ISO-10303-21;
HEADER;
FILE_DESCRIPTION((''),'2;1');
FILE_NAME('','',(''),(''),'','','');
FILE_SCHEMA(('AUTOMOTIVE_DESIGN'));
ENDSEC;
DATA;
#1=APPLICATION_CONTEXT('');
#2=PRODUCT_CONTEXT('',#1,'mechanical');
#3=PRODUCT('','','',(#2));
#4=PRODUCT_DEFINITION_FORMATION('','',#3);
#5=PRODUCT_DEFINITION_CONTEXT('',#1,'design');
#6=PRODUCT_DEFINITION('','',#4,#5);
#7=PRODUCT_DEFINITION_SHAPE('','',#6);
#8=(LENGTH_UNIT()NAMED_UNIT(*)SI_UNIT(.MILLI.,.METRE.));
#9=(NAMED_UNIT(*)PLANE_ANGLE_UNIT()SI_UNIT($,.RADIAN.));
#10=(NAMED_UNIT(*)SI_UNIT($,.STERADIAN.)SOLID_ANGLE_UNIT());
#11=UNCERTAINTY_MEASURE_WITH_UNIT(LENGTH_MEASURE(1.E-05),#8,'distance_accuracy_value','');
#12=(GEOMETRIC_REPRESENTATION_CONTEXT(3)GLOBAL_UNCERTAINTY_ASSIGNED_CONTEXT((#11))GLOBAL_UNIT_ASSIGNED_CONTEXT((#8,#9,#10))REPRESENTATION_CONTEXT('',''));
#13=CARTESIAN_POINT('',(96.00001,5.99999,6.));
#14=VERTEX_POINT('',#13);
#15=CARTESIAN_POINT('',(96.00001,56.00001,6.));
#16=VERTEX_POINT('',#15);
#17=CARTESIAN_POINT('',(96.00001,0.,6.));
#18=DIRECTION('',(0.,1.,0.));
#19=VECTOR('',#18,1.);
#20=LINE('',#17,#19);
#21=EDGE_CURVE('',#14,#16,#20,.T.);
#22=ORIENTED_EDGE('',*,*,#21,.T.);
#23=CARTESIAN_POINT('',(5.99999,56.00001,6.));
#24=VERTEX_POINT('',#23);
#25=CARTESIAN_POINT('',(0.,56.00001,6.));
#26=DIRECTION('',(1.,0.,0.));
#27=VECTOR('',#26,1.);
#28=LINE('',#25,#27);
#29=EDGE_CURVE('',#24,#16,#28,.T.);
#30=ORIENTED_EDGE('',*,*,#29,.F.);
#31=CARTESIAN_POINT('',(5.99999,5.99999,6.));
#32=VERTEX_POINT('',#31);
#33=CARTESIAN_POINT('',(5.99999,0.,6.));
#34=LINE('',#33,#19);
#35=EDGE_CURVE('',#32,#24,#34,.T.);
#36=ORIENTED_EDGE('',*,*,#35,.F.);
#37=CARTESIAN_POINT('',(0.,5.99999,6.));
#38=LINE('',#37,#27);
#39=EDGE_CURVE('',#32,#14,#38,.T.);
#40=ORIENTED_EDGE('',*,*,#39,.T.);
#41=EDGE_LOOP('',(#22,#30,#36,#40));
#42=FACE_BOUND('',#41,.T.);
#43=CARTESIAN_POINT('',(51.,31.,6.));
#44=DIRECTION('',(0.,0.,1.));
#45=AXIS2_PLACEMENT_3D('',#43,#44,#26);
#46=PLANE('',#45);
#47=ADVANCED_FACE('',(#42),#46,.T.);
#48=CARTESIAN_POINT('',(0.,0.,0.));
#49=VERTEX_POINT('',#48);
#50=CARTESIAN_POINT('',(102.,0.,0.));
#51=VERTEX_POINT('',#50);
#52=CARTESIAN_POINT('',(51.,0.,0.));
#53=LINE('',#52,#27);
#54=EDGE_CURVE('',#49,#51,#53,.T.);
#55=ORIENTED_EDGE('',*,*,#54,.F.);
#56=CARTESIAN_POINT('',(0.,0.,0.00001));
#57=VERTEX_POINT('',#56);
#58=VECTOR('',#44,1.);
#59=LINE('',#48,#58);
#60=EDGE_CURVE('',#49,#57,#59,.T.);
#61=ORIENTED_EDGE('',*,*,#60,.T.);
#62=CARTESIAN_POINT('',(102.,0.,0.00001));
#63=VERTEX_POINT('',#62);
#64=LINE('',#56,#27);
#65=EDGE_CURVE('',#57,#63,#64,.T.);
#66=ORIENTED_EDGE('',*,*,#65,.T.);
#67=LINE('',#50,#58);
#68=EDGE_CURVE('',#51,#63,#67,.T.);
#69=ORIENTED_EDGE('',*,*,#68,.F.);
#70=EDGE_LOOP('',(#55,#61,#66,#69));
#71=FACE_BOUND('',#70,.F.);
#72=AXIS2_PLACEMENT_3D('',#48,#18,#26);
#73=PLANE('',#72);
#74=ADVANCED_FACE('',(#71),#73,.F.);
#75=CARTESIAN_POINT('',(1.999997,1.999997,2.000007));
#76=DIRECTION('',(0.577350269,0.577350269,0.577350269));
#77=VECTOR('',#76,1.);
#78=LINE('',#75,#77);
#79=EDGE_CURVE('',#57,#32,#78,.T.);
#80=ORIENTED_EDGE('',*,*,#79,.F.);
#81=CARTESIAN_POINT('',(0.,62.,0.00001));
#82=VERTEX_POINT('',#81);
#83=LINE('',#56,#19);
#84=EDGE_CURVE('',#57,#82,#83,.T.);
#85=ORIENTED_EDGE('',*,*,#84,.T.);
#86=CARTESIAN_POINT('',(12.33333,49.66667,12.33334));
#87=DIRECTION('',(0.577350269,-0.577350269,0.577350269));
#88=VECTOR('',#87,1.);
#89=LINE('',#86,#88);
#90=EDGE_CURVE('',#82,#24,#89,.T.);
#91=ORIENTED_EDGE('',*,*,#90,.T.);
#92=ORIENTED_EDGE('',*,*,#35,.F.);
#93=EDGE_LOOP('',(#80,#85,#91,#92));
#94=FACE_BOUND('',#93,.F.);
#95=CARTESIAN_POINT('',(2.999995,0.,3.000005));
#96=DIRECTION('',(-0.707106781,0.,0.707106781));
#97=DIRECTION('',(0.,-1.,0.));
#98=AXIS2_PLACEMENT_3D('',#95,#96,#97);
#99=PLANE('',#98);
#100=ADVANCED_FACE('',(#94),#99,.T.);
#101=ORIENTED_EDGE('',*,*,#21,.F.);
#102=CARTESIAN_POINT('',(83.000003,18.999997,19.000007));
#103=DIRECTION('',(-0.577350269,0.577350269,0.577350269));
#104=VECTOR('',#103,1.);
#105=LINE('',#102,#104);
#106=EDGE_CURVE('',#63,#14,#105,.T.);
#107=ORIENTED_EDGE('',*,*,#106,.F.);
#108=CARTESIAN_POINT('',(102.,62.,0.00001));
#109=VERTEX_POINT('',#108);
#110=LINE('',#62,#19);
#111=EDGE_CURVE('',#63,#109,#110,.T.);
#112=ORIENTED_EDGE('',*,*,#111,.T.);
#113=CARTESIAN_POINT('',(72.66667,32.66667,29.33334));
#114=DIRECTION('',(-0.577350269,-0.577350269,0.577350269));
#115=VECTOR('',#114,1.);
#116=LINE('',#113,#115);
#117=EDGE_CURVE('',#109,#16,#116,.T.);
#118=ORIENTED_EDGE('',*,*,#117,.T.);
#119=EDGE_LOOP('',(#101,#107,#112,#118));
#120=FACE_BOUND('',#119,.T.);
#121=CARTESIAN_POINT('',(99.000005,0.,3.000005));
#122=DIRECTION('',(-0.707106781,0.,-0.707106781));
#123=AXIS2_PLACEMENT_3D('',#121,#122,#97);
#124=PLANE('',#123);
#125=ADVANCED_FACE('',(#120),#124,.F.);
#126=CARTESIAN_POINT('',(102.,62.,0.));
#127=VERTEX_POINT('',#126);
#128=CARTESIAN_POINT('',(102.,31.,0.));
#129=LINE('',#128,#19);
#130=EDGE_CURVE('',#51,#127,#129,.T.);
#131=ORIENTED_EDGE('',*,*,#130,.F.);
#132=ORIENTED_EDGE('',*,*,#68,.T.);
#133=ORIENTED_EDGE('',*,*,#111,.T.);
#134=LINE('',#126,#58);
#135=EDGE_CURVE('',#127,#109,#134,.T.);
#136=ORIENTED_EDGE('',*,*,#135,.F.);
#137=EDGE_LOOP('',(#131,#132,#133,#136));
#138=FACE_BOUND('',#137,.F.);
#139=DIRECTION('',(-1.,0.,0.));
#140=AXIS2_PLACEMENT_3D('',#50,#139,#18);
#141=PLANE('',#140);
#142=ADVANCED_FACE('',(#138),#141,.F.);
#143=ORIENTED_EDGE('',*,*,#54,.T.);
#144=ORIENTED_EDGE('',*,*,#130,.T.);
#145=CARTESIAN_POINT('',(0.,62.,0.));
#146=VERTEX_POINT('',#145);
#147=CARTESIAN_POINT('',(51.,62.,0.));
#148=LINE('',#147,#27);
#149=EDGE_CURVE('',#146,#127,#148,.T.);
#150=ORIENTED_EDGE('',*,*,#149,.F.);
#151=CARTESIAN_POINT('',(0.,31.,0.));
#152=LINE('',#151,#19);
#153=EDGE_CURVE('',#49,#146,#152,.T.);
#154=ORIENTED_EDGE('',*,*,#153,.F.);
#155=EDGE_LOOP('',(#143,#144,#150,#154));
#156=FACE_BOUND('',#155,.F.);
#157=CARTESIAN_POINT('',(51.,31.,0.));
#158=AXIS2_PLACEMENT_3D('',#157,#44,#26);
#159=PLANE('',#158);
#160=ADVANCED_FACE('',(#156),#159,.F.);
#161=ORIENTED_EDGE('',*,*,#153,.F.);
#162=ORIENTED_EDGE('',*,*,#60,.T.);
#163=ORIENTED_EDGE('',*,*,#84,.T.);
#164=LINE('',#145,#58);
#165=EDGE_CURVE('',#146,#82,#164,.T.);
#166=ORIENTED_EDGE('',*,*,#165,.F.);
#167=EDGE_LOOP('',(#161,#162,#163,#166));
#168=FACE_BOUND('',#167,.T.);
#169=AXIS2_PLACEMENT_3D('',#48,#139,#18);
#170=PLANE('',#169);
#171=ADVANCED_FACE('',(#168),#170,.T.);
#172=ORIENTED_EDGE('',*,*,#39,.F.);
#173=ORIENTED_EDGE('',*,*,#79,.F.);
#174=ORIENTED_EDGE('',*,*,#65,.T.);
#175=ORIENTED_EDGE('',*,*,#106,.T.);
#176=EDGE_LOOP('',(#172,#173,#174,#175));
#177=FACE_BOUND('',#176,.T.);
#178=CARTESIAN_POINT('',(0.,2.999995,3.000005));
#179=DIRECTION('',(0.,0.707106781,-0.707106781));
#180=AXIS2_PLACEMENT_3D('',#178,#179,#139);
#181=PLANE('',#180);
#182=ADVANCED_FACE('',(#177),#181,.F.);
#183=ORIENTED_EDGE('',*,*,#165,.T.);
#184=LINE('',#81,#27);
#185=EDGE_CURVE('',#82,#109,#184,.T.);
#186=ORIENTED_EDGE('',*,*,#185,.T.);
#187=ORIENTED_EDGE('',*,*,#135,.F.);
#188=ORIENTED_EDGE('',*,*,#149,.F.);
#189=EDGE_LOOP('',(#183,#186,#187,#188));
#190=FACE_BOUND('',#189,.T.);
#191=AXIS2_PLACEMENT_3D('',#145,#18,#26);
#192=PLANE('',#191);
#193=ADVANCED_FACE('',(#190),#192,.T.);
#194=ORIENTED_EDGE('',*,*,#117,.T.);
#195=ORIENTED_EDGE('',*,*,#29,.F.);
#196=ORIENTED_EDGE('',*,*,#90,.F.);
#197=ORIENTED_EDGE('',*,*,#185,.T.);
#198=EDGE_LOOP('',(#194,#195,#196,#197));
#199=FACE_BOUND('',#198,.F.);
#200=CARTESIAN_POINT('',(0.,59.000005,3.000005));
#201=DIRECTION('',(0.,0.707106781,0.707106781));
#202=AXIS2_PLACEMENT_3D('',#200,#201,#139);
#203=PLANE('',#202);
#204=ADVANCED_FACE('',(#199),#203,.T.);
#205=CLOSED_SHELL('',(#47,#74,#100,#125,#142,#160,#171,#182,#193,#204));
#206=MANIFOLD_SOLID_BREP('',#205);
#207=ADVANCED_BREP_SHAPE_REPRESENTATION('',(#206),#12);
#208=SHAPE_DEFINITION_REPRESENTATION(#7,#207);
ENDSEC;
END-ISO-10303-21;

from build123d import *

# Parameters (mm, degrees)
F0_W     = 102
F0_H     = 62
F1_DEPTH = 6
F2_SIZE  = 5.99999


# Not quite as in the source:
# - a fillet or chamfer is up to 0.001 mm smaller than in the source, because OpenCascade refuses the exact size


with BuildPart() as f1:
    # F0 (on Top) → F1 (new body)
    with BuildSketch(Plane.XY):
        with Locations((51, 31)):
            Rectangle(F0_W, F0_H)
    extrude(amount=F1_DEPTH)

    # F2 (size 6 in the source; OpenCascade refuses exactly that, so slightly less here)
    f2_edges = [f1.edges().sort_by_distance(p)[0] for p in [
        (51, 0, 6),
        (102, 31, 6),
        (51, 62, 6),
        (0, 31, 6),
    ]]
    chamfer(f2_edges, length=F2_SIZE)


solid = f1.part
